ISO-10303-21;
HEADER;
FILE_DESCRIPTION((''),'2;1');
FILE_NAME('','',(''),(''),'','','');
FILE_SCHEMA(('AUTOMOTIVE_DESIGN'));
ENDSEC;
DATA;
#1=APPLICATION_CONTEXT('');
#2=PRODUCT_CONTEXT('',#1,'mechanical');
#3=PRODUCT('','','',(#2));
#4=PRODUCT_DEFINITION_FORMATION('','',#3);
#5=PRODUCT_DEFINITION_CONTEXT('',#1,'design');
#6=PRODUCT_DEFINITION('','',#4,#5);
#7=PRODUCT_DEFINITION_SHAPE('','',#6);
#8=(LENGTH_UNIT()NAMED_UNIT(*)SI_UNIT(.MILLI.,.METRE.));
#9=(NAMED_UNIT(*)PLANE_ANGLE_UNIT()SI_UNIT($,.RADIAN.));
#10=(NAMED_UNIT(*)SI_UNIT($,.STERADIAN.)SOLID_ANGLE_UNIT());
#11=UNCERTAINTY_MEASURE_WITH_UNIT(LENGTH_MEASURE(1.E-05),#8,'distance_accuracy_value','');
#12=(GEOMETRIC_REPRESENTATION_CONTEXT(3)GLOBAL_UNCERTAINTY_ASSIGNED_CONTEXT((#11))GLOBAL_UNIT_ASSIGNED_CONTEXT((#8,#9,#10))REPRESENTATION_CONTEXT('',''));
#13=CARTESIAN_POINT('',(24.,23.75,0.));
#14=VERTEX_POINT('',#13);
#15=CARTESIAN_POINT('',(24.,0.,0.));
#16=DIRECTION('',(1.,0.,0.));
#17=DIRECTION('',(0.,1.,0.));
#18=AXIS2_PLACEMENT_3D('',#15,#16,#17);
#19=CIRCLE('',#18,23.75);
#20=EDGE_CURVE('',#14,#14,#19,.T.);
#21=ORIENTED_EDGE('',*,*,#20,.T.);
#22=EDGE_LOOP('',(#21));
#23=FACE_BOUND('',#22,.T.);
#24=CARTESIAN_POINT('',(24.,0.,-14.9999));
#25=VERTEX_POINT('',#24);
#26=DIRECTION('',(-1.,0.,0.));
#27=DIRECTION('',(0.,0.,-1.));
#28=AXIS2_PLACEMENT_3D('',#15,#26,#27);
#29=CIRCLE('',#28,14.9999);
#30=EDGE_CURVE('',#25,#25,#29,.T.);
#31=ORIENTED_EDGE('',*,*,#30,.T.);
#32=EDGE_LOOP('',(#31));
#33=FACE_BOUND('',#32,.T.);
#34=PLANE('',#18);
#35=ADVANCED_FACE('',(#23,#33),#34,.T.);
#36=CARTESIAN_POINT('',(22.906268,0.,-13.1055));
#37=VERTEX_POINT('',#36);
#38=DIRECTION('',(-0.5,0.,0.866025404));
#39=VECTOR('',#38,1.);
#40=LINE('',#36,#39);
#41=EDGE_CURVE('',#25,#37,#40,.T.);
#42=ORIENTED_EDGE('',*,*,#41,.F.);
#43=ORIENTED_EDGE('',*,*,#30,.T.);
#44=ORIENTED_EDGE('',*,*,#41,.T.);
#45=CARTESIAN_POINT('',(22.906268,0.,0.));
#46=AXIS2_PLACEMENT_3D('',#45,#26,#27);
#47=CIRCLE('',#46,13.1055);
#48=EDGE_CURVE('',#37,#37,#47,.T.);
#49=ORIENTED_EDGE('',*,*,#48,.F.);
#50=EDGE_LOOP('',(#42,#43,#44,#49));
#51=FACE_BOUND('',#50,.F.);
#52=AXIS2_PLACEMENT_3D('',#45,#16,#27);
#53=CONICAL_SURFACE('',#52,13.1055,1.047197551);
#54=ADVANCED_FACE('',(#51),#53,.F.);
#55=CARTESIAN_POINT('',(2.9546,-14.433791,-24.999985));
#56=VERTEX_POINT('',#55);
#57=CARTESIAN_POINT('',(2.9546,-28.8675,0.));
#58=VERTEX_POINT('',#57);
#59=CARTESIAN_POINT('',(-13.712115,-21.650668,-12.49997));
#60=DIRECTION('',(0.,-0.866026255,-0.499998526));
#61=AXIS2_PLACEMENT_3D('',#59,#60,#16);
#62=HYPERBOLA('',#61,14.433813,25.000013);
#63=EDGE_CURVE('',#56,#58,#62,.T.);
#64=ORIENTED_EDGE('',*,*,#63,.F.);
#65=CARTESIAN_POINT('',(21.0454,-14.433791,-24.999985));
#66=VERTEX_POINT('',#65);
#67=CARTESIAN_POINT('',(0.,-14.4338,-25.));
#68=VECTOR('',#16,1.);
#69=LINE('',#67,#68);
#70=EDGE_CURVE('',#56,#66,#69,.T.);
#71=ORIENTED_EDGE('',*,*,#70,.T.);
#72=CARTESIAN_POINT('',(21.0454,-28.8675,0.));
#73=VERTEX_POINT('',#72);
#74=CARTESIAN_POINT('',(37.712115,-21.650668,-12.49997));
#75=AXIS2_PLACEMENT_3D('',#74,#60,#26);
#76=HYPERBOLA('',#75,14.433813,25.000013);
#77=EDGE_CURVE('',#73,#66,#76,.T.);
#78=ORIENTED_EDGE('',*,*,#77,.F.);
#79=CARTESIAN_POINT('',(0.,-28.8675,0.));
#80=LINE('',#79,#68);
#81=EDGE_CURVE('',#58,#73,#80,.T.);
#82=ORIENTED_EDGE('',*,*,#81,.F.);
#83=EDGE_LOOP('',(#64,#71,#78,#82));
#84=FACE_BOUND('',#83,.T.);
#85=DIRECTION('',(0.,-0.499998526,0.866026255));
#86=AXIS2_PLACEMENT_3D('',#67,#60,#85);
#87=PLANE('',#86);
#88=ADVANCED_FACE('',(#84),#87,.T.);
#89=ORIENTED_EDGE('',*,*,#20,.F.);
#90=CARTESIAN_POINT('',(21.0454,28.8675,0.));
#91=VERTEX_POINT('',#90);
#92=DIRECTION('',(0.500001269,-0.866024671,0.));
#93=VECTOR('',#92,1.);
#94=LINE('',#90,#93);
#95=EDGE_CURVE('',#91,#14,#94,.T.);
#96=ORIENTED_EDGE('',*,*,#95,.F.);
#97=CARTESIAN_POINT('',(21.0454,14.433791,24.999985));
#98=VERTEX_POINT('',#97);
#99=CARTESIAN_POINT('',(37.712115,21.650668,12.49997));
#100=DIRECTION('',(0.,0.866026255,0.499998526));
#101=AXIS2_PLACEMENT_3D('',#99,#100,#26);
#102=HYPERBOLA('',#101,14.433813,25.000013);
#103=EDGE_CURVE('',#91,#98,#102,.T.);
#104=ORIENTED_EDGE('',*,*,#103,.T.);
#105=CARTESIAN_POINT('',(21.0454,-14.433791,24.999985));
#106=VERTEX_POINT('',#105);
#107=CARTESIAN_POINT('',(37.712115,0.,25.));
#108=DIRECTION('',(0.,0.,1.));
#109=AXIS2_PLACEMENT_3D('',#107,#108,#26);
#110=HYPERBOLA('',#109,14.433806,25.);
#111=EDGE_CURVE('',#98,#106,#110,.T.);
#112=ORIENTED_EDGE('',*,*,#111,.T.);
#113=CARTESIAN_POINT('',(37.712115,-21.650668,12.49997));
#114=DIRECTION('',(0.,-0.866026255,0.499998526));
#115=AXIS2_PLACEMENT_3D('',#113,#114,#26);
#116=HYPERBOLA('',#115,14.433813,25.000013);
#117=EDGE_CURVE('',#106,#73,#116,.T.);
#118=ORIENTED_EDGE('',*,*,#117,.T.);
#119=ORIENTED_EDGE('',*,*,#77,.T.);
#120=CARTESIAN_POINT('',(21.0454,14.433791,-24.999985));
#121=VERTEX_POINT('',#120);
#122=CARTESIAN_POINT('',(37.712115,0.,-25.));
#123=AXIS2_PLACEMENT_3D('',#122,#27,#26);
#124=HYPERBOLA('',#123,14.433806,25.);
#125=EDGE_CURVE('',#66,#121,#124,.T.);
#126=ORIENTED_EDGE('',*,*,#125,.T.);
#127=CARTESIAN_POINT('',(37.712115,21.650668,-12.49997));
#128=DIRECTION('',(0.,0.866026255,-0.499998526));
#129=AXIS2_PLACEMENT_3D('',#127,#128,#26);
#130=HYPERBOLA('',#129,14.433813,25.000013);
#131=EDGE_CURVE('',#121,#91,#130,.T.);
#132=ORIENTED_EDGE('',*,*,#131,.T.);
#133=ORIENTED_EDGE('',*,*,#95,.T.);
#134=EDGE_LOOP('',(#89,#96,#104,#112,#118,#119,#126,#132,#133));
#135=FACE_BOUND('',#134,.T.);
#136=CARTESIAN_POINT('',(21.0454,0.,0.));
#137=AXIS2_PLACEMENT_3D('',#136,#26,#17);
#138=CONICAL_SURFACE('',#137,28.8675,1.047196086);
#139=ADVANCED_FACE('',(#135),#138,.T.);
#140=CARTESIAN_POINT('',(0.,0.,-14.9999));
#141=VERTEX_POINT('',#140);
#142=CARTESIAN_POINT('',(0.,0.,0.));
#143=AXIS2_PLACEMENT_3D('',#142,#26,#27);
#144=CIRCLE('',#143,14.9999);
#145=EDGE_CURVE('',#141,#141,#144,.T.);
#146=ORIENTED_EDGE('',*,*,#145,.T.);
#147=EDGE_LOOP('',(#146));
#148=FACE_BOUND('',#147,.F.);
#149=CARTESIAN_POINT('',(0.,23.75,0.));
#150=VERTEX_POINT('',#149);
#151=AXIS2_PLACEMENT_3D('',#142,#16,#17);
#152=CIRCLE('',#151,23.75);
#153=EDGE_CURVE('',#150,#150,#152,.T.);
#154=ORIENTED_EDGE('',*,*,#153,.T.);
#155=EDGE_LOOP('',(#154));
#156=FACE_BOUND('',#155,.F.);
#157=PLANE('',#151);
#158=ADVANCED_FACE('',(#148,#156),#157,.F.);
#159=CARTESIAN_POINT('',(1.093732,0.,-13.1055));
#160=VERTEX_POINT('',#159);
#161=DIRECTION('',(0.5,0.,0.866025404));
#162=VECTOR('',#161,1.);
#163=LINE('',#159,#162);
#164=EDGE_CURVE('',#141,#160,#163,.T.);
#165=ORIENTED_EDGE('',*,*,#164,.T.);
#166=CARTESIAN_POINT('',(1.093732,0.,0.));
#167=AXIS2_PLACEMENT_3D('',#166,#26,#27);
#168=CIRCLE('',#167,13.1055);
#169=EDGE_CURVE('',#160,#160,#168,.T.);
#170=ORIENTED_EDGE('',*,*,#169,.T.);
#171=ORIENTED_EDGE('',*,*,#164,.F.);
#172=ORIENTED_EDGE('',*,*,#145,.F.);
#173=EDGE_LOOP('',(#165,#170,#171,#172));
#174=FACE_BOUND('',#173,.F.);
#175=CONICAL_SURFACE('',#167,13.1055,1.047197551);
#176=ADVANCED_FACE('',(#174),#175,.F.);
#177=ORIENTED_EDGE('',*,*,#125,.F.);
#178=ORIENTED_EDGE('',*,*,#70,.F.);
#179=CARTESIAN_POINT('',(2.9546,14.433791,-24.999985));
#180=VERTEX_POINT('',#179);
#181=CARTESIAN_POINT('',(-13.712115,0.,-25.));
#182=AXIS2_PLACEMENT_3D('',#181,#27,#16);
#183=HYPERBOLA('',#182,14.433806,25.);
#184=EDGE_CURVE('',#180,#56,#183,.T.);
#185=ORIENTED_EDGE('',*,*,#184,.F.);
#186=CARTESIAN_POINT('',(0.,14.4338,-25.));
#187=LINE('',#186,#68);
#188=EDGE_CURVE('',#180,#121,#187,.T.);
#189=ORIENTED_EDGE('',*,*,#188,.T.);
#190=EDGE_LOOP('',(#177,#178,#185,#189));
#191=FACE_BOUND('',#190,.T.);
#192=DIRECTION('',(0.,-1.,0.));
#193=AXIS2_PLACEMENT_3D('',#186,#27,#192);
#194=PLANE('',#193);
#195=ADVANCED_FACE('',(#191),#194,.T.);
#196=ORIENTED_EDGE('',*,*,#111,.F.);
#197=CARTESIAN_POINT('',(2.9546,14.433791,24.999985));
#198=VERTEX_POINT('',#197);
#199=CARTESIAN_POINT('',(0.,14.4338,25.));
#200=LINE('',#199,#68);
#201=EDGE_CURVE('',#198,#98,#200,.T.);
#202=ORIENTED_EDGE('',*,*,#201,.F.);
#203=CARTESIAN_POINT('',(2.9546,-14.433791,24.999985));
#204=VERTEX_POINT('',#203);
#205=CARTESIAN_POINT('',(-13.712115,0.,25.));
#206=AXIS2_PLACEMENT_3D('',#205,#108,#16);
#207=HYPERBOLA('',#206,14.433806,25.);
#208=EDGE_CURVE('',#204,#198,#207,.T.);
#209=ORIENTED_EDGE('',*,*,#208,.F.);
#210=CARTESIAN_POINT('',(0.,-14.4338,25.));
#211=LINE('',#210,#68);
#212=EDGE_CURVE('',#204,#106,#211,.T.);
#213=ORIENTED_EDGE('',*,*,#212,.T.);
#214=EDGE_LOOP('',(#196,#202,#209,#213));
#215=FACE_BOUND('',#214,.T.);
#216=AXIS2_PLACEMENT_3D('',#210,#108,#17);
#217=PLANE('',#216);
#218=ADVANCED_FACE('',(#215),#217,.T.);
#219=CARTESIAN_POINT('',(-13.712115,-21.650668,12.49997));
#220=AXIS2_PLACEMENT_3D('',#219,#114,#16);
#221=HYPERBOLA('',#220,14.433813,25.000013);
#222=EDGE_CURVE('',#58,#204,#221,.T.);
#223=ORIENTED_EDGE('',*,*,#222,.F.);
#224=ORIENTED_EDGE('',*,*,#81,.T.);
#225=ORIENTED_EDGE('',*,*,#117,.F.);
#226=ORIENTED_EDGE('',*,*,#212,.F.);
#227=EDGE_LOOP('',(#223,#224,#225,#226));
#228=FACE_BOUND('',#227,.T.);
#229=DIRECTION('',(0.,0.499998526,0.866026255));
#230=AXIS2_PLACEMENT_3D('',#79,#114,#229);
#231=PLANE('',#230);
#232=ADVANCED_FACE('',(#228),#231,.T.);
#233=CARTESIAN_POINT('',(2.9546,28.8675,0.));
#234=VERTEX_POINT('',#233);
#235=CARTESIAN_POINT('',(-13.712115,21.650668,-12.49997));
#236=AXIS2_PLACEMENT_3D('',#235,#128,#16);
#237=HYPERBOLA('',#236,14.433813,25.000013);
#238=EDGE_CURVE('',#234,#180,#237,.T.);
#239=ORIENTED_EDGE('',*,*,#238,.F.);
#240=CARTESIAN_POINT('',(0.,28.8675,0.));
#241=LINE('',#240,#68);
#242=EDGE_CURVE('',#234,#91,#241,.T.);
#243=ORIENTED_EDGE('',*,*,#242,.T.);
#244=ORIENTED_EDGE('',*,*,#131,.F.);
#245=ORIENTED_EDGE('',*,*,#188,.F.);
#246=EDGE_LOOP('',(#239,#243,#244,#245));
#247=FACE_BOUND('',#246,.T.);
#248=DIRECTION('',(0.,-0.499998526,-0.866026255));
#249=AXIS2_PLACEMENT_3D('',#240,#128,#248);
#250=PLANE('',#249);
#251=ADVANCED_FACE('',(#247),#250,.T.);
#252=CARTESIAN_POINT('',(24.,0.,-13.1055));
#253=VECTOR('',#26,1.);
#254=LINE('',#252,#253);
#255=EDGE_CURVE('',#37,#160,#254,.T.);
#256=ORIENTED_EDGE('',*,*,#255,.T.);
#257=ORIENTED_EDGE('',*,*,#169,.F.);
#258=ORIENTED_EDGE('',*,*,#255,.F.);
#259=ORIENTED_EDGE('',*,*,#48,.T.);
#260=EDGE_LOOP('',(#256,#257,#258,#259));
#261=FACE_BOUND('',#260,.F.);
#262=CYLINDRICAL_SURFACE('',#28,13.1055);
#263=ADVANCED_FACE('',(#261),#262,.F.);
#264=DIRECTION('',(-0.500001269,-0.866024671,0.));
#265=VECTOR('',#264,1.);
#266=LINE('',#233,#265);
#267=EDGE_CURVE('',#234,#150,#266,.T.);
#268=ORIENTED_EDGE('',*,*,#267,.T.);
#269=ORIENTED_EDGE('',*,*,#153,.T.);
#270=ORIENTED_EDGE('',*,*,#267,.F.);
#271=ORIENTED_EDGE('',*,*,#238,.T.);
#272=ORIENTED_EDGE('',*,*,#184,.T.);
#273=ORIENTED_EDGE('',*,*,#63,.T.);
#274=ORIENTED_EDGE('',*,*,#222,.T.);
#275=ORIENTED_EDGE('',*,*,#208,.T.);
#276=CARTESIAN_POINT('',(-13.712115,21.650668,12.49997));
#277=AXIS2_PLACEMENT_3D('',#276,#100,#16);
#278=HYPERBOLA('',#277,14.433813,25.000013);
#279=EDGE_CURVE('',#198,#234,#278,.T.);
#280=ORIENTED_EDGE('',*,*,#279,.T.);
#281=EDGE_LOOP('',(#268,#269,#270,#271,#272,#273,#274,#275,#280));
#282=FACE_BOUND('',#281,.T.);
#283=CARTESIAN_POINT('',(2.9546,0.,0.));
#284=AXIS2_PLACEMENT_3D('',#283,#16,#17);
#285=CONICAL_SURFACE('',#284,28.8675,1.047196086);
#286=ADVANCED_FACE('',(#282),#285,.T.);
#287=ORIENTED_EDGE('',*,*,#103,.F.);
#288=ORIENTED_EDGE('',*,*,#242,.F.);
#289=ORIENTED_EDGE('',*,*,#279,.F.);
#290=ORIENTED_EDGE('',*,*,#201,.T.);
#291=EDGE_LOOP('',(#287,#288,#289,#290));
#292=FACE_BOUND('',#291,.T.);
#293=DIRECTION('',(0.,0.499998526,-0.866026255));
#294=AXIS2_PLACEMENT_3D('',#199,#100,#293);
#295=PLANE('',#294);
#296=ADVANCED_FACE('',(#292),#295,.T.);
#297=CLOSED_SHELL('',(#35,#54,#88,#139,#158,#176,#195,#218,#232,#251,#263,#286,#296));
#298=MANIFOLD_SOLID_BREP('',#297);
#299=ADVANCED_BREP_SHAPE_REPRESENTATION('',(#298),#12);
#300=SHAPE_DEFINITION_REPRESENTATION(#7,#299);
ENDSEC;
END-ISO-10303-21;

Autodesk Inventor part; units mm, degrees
ref_plane "YZ Plane" through (0, 0, 0) normal (1, 0, 0) x (0, 1, 0)
ref_plane "XZ Plane" through (0, 0, 0) normal (0, 1, 0) x (-1, 0, 0)
sketch "Sketch1" plane through (0, 0, 0) normal (1, 0, 0) x (0, 1, 0)
  line L0 (-28.8675, 0) -> (-14.4338, 25)
  line L1 (-14.4338, 25) -> (14.4338, 25)
  line L2 (14.4338, 25) -> (28.8675, 0)
  line L3 (28.8675, 0) -> (14.4338, -25)
  line L4 (14.4338, -25) -> (-14.4338, -25)
  line L5 (-14.4338, -25) -> (-28.8675, 0)
  point P0 (0, 0)
  point P1 (0, 0)
  dimension "d0" = 57.735
extrude "Body" add sketch "Sketch1" along normal blind 24
sketch "Sketch2" plane through (0, 0, 0) normal (0, 0, 1) x (1, 0, 0)
  line L0 (0, 14.4338) -> (0, 28.8675) projected
  line L1 (0, 28.8675) -> (24, 28.8675) projected
  line L2 (24, 14.4338) -> (24, 28.8675) projected
  line L3 (-4.8, 0) -> (28.8, 0) projected
  line L4 (2.9546, 28.8675) -> (0, 23.75)
  line L5 (21.0454, 28.8675) -> (24, 23.75)
  dimension "d3" = 30
  dimension "d4" = 30
  dimension "d5" = 47.5
  dimension "d6" = 47.5
revolve "Chamfer1" cut sketch "Sketch2" angle 360 about axis through (-10, 0, 0) along (1, 0, 0)
sketch "Sketch3" plane through (24, 0, 0) normal (1, 0, 0) x (0, 0, -1)
  arc A0 (-0.625, -1.0825) -> (0.625, -1.0825) centre (0, 0) ccw projected
hole "Thread" at (24, 0, 0) direction (-1, 0, 0) diameter 26.211 end through all thread size "M30x3.5" class "6H" standard "ISO Metric profile"
chamfer "Chamfer2" distance 1.8944 angle 30 1 edges at (24, 0, 13.1055) measured on face at (24, 19.9399, -2.4211)
chamfer "Chamfer3" distance 1.8944 angle 30 1 edges at (0, 0, 13.1055) measured on face at (0, 19.9399, -2.4211)
ref_plane "Work Plane1" through (-56.8181, 0, 0) normal (0, -0.8660254, -0.5) x (1, 0, 0)
equation "\"d0\" = 1.1547 * SW"
equation "\"d1\" = KOH"
equation "\"d3\" = ANG1"
equation "\"d4\" = ANG2"
equation "\"d5\" = SW0"
equation "\"d6\" = SW01"
equation "\"d8\" = -0.5 * GD1 + 0.5 * NND"
equation "\"d40\" = -0.5 * GD1 + 0.5 * NND"
equation "\"d10\" = -0.5 * GD1 + 0.5 * NND"
equation "\"d41\" = -0.5 * GD1 + 0.5 * NND"
equation "\"ANG1\" = 30deg"
equation "\"ANG2\" = 30deg"
equation "\"KOH\" = 24"
equation "\"SW0\" = 47.5"
equation "\"SW01\" = SW0"
equation "\"GUL\" = 0.541266 * PTC"
equation "\"TOA\" = 30deg"
equation "\"PTC\" = 3.5"
equation "\"E0\" = 1.155 * SW"
equation "\"GAL\" = 0.541266 * PTC"
equation "\"Mw\" = 18.16"
equation "\"SW\" = 50"
equation "\"GD1\" = 26.211139"
equation "\"NND\" = 30"
properties part number "DIN 6915 - M30" material "Steel ASTM 194 2H"
